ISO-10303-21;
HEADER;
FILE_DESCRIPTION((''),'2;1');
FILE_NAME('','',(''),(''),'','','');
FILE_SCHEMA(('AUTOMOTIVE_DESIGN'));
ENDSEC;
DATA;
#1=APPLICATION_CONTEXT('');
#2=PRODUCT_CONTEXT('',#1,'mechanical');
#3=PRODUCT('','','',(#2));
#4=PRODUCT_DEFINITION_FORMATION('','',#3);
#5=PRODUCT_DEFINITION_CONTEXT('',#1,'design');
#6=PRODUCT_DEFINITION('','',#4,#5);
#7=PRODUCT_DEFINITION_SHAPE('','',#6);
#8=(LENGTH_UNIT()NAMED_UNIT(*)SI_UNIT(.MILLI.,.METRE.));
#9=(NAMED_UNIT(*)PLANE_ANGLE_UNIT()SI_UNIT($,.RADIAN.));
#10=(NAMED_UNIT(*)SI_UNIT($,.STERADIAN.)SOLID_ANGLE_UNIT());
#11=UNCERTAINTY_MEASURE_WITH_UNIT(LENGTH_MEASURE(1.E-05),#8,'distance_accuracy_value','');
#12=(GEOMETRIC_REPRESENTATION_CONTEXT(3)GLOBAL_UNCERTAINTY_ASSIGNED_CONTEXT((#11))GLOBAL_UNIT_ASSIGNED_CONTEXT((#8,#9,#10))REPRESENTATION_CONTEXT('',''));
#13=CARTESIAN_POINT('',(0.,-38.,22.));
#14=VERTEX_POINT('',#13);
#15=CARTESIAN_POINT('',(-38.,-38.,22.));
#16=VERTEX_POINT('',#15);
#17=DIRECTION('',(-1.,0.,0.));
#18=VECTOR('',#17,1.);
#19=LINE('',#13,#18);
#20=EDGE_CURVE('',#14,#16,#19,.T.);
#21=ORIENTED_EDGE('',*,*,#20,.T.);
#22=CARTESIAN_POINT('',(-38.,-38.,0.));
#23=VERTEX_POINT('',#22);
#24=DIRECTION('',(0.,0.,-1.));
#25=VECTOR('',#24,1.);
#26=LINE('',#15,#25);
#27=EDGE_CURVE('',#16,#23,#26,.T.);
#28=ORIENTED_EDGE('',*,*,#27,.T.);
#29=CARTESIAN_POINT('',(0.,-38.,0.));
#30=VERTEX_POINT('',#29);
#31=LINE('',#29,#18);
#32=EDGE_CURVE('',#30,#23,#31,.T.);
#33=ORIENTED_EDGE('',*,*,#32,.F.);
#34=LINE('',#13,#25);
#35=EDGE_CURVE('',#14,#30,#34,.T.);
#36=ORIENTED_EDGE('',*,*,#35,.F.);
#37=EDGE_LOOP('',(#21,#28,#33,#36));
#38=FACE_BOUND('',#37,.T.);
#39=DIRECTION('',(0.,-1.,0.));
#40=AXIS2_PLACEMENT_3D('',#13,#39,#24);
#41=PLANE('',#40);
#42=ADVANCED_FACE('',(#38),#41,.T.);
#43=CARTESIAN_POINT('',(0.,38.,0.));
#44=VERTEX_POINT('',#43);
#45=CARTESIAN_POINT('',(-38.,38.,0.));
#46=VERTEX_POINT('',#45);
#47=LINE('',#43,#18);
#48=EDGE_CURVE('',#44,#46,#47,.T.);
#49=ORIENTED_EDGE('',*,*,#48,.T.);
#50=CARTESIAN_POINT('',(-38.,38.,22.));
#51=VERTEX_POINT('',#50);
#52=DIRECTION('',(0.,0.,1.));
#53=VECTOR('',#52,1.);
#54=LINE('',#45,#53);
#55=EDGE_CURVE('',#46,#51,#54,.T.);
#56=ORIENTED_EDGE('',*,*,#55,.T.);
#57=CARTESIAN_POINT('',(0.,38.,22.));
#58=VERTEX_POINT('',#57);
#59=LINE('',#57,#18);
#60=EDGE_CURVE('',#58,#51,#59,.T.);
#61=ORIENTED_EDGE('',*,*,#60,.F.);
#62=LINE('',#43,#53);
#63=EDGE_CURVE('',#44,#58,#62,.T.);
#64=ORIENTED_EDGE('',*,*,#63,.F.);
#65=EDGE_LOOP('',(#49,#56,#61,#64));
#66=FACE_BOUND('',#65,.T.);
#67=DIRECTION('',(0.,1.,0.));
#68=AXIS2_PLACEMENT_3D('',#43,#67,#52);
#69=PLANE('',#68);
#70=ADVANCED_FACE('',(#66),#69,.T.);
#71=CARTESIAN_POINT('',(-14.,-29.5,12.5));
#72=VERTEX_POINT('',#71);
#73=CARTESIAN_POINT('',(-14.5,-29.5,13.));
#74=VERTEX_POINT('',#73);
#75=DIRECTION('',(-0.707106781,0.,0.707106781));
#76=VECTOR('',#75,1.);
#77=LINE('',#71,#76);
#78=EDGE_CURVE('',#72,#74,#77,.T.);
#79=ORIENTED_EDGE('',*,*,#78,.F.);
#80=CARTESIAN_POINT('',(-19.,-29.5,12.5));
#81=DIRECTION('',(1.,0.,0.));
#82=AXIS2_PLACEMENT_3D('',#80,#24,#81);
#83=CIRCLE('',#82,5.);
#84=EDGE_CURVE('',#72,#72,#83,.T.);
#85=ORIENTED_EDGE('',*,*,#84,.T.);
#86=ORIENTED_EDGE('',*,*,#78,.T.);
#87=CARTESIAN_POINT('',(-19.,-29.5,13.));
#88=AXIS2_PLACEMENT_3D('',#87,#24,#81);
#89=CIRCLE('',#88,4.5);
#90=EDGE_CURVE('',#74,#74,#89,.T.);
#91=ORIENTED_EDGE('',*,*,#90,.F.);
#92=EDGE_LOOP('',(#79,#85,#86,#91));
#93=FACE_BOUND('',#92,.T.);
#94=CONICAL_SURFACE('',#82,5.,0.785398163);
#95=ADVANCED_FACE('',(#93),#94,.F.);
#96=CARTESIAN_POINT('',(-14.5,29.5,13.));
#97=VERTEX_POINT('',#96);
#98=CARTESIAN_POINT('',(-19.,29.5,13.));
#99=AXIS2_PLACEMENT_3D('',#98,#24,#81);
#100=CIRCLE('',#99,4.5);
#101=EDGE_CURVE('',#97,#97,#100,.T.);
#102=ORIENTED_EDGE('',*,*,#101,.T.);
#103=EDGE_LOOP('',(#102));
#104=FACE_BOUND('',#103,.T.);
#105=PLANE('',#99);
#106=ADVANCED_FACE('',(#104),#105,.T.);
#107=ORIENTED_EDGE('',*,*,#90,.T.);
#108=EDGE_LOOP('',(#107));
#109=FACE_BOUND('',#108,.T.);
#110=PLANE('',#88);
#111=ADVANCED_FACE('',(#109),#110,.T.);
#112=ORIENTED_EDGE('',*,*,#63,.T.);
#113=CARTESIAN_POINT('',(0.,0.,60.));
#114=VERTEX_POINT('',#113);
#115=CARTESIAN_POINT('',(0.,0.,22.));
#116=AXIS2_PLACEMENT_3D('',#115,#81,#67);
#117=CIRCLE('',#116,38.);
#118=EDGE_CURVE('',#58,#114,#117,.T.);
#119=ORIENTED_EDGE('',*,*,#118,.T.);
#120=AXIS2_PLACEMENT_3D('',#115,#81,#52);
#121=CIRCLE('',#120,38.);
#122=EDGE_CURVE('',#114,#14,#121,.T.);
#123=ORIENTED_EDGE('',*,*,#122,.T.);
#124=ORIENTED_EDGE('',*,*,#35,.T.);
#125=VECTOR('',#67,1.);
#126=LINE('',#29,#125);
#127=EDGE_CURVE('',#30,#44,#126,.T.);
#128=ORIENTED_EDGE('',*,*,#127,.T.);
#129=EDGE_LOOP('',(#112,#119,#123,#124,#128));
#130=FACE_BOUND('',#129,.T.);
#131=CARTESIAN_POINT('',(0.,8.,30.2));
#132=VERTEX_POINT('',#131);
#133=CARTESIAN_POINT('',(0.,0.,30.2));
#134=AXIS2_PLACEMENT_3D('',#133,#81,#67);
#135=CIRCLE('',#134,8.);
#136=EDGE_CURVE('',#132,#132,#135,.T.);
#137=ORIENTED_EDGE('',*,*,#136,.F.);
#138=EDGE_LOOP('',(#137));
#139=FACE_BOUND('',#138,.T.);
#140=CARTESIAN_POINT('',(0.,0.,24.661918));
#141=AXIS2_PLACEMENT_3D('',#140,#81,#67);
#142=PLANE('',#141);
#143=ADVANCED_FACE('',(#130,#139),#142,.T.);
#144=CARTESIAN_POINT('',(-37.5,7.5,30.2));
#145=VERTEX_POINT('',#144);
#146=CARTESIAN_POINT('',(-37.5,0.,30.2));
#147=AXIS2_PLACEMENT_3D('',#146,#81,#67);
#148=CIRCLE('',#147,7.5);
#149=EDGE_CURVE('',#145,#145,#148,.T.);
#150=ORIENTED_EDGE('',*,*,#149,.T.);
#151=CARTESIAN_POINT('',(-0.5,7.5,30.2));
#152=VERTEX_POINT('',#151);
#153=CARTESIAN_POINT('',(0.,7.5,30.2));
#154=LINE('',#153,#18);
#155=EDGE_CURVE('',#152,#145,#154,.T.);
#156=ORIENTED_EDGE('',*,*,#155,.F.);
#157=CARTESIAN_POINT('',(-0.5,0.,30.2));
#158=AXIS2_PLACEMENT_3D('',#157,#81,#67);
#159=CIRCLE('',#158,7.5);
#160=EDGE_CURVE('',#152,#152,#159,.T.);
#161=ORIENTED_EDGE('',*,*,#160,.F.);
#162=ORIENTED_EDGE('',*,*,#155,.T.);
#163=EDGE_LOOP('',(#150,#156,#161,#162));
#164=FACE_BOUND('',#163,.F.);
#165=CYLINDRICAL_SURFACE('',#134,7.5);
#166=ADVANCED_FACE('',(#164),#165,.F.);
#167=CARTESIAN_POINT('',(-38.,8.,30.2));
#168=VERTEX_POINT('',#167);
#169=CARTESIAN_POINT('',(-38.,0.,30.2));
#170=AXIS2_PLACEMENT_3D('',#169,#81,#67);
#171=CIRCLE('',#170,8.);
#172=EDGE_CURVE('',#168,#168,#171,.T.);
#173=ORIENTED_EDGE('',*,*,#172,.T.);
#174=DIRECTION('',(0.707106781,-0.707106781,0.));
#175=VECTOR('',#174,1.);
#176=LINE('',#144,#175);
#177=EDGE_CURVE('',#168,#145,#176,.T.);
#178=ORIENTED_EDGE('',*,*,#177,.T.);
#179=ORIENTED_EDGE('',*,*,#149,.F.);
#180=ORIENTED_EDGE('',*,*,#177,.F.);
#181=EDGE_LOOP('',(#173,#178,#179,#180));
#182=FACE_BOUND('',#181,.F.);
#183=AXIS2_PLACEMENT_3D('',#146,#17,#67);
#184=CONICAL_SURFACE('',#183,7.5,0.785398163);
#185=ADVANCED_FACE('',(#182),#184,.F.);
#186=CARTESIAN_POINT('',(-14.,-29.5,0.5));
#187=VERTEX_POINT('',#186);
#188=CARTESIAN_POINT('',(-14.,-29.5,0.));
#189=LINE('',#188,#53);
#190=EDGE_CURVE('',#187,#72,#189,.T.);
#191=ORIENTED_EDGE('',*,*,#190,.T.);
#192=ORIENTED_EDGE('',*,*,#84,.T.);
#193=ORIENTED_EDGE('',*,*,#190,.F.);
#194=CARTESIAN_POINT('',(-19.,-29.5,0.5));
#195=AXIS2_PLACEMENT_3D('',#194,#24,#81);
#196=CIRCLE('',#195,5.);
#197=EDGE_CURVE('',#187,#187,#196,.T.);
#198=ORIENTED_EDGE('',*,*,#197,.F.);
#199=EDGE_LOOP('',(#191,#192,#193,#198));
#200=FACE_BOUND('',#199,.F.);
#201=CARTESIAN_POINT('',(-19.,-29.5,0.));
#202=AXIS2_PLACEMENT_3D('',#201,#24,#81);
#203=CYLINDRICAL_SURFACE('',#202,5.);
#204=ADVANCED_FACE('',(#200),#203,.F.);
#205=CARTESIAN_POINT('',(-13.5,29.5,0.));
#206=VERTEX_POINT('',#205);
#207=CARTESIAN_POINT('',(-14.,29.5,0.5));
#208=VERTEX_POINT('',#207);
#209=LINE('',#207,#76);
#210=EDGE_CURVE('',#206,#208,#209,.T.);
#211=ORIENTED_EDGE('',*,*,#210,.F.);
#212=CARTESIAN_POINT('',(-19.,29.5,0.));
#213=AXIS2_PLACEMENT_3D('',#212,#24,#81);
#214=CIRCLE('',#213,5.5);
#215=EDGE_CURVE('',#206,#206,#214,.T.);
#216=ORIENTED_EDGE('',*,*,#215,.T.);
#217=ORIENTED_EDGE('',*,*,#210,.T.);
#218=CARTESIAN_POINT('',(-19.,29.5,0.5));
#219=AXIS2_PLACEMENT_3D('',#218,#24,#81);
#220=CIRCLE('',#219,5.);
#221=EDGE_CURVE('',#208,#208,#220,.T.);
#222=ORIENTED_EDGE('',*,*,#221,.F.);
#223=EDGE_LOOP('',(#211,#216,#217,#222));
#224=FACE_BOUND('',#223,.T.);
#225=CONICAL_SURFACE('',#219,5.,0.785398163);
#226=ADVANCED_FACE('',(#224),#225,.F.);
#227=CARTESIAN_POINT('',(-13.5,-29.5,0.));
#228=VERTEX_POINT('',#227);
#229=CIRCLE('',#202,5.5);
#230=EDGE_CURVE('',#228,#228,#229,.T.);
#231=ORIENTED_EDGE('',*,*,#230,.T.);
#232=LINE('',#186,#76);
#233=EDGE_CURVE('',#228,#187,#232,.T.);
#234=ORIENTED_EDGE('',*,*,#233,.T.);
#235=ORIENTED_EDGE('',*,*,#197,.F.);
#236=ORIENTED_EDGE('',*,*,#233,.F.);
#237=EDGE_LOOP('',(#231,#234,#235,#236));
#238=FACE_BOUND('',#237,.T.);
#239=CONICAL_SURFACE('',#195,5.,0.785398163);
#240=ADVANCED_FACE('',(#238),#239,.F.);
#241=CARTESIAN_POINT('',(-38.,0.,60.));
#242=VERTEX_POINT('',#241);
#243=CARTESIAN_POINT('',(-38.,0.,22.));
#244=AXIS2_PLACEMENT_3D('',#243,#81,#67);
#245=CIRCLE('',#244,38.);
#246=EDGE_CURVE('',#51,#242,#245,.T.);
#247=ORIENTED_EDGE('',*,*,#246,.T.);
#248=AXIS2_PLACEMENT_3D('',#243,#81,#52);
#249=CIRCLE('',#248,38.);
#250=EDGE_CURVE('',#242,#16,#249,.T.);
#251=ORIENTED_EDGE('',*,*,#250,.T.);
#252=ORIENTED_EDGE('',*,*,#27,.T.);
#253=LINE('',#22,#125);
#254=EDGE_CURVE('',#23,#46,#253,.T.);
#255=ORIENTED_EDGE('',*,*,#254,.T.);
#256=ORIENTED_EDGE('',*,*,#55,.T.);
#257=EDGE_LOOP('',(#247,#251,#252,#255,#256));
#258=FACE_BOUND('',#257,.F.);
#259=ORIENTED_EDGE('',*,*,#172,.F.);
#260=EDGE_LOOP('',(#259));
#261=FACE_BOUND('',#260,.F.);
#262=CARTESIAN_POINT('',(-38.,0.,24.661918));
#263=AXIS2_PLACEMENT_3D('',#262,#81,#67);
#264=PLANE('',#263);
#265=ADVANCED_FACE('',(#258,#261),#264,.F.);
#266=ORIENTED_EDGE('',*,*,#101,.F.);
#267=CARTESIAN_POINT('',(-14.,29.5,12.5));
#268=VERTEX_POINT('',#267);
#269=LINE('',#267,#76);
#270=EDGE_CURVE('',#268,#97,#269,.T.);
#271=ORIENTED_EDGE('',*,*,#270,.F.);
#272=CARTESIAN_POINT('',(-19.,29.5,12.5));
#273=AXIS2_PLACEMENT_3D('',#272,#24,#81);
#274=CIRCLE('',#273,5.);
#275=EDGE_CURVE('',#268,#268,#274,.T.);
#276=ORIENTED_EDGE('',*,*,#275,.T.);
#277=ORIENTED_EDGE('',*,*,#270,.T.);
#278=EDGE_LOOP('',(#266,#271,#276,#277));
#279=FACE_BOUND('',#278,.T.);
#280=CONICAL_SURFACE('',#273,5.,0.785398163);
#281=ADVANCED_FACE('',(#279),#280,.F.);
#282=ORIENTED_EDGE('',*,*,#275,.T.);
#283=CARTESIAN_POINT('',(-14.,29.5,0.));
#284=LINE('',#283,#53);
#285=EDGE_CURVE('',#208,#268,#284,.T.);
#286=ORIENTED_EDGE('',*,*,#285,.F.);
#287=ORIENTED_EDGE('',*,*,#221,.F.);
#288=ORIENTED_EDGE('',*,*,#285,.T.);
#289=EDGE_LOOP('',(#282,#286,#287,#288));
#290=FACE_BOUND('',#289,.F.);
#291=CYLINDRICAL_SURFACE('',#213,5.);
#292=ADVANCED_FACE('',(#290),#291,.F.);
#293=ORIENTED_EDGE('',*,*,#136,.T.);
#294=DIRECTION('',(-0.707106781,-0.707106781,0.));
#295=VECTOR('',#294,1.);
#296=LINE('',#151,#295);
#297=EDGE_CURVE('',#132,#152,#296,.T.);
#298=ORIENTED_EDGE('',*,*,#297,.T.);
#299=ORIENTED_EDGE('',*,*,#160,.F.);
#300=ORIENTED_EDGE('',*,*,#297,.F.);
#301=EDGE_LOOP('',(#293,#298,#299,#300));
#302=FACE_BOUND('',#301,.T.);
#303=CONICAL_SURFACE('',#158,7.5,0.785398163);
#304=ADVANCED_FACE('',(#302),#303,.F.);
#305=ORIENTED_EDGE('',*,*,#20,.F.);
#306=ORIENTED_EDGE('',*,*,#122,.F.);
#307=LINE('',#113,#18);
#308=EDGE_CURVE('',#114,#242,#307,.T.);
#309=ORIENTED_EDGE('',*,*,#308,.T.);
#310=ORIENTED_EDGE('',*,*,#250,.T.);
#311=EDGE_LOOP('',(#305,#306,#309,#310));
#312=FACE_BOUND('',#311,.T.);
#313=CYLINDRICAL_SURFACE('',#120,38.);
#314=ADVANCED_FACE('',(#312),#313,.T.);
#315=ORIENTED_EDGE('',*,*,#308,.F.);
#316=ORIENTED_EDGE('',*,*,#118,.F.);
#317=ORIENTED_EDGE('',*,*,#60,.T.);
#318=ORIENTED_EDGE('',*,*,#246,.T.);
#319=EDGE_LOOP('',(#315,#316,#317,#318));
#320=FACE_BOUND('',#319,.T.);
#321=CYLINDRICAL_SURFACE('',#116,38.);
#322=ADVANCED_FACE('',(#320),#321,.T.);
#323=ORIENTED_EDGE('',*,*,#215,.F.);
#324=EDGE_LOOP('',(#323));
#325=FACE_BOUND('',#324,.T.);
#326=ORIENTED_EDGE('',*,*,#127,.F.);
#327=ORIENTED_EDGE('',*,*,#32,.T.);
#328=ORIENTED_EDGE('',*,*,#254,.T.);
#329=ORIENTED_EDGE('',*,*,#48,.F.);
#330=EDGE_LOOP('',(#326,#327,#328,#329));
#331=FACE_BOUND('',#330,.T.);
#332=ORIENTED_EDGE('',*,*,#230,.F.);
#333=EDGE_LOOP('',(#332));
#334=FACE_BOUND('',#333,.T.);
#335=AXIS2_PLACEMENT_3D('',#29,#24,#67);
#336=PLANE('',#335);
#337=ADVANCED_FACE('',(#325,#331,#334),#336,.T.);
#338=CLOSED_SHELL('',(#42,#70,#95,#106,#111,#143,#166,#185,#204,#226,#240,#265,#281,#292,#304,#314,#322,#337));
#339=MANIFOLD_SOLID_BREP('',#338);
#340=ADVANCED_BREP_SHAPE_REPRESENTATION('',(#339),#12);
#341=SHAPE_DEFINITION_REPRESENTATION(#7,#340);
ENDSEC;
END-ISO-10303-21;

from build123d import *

# Parameters (mm, degrees)
F1_DEPTH = 38
F2_R     = 7.5
F3_DEPTH = 38.001
F4_SIZE  = 0.5
F5_R     = 5
F6_DEPTH = 13
F7_SIZE  = 0.5


# Not quite as in the source:
# - a feature names something its author has since deleted; it is built from what else it names


with BuildPart() as f1:
    # F0 (on Right) → F1 (new body)
    with BuildSketch(Plane.YZ):
        with BuildLine():
            Line((-38, 0), (0, 0))
            Line((0, 0), (38, 0))
            Line((38, 0), (38, 22))
            ThreePointArc((38, 22), (26.8700576851, 48.8700576851), (0, 60))
            ThreePointArc((0, 60), (-26.8700576851, 48.8700576851), (-38, 22))
            Line((-38, 22), (-38, 0))
        make_face()
    extrude(amount=-F1_DEPTH)

    # F2 (on face) → F3 (cut, through all)
    with BuildSketch(Plane.YZ):
        with Locations((0, 30.2)):
            Circle(F2_R)
    extrude(amount=-F3_DEPTH, mode=Mode.SUBTRACT)

    # F4
    f4_edges = [f1.edges().sort_by_distance(p)[0] for p in [
        (0, -7.5, 30.2),
        (-19, 7.5, 30.2),
        (-38, -7.5, 30.2),
    ]]
    chamfer(f4_edges, length=F4_SIZE)

    # F5 (on face) → F6 (cut)
    with BuildSketch(Plane(origin=(0, 0, 0), x_dir=(1, 0, 0), z_dir=(0, 0, -1))):
        with Locations((-19, 29.5)):
            Circle(F5_R)
        with Locations((-19, -29.5)):
            Circle(F5_R)
    extrude(amount=-F6_DEPTH, mode=Mode.SUBTRACT)

    # F7
    f7_edges = [f1.edges().sort_by_distance(p)[0] for p in [
        (-14, -29.5, 6.5),
        (-24, -29.5, 0),
        (-24, -29.5, 13),
        (-14, 29.5, 6.5),
        (-24, 29.5, 0),
        (-24, 29.5, 13),
    ]]
    chamfer(f7_edges, length=F7_SIZE)


solid = f1.part
